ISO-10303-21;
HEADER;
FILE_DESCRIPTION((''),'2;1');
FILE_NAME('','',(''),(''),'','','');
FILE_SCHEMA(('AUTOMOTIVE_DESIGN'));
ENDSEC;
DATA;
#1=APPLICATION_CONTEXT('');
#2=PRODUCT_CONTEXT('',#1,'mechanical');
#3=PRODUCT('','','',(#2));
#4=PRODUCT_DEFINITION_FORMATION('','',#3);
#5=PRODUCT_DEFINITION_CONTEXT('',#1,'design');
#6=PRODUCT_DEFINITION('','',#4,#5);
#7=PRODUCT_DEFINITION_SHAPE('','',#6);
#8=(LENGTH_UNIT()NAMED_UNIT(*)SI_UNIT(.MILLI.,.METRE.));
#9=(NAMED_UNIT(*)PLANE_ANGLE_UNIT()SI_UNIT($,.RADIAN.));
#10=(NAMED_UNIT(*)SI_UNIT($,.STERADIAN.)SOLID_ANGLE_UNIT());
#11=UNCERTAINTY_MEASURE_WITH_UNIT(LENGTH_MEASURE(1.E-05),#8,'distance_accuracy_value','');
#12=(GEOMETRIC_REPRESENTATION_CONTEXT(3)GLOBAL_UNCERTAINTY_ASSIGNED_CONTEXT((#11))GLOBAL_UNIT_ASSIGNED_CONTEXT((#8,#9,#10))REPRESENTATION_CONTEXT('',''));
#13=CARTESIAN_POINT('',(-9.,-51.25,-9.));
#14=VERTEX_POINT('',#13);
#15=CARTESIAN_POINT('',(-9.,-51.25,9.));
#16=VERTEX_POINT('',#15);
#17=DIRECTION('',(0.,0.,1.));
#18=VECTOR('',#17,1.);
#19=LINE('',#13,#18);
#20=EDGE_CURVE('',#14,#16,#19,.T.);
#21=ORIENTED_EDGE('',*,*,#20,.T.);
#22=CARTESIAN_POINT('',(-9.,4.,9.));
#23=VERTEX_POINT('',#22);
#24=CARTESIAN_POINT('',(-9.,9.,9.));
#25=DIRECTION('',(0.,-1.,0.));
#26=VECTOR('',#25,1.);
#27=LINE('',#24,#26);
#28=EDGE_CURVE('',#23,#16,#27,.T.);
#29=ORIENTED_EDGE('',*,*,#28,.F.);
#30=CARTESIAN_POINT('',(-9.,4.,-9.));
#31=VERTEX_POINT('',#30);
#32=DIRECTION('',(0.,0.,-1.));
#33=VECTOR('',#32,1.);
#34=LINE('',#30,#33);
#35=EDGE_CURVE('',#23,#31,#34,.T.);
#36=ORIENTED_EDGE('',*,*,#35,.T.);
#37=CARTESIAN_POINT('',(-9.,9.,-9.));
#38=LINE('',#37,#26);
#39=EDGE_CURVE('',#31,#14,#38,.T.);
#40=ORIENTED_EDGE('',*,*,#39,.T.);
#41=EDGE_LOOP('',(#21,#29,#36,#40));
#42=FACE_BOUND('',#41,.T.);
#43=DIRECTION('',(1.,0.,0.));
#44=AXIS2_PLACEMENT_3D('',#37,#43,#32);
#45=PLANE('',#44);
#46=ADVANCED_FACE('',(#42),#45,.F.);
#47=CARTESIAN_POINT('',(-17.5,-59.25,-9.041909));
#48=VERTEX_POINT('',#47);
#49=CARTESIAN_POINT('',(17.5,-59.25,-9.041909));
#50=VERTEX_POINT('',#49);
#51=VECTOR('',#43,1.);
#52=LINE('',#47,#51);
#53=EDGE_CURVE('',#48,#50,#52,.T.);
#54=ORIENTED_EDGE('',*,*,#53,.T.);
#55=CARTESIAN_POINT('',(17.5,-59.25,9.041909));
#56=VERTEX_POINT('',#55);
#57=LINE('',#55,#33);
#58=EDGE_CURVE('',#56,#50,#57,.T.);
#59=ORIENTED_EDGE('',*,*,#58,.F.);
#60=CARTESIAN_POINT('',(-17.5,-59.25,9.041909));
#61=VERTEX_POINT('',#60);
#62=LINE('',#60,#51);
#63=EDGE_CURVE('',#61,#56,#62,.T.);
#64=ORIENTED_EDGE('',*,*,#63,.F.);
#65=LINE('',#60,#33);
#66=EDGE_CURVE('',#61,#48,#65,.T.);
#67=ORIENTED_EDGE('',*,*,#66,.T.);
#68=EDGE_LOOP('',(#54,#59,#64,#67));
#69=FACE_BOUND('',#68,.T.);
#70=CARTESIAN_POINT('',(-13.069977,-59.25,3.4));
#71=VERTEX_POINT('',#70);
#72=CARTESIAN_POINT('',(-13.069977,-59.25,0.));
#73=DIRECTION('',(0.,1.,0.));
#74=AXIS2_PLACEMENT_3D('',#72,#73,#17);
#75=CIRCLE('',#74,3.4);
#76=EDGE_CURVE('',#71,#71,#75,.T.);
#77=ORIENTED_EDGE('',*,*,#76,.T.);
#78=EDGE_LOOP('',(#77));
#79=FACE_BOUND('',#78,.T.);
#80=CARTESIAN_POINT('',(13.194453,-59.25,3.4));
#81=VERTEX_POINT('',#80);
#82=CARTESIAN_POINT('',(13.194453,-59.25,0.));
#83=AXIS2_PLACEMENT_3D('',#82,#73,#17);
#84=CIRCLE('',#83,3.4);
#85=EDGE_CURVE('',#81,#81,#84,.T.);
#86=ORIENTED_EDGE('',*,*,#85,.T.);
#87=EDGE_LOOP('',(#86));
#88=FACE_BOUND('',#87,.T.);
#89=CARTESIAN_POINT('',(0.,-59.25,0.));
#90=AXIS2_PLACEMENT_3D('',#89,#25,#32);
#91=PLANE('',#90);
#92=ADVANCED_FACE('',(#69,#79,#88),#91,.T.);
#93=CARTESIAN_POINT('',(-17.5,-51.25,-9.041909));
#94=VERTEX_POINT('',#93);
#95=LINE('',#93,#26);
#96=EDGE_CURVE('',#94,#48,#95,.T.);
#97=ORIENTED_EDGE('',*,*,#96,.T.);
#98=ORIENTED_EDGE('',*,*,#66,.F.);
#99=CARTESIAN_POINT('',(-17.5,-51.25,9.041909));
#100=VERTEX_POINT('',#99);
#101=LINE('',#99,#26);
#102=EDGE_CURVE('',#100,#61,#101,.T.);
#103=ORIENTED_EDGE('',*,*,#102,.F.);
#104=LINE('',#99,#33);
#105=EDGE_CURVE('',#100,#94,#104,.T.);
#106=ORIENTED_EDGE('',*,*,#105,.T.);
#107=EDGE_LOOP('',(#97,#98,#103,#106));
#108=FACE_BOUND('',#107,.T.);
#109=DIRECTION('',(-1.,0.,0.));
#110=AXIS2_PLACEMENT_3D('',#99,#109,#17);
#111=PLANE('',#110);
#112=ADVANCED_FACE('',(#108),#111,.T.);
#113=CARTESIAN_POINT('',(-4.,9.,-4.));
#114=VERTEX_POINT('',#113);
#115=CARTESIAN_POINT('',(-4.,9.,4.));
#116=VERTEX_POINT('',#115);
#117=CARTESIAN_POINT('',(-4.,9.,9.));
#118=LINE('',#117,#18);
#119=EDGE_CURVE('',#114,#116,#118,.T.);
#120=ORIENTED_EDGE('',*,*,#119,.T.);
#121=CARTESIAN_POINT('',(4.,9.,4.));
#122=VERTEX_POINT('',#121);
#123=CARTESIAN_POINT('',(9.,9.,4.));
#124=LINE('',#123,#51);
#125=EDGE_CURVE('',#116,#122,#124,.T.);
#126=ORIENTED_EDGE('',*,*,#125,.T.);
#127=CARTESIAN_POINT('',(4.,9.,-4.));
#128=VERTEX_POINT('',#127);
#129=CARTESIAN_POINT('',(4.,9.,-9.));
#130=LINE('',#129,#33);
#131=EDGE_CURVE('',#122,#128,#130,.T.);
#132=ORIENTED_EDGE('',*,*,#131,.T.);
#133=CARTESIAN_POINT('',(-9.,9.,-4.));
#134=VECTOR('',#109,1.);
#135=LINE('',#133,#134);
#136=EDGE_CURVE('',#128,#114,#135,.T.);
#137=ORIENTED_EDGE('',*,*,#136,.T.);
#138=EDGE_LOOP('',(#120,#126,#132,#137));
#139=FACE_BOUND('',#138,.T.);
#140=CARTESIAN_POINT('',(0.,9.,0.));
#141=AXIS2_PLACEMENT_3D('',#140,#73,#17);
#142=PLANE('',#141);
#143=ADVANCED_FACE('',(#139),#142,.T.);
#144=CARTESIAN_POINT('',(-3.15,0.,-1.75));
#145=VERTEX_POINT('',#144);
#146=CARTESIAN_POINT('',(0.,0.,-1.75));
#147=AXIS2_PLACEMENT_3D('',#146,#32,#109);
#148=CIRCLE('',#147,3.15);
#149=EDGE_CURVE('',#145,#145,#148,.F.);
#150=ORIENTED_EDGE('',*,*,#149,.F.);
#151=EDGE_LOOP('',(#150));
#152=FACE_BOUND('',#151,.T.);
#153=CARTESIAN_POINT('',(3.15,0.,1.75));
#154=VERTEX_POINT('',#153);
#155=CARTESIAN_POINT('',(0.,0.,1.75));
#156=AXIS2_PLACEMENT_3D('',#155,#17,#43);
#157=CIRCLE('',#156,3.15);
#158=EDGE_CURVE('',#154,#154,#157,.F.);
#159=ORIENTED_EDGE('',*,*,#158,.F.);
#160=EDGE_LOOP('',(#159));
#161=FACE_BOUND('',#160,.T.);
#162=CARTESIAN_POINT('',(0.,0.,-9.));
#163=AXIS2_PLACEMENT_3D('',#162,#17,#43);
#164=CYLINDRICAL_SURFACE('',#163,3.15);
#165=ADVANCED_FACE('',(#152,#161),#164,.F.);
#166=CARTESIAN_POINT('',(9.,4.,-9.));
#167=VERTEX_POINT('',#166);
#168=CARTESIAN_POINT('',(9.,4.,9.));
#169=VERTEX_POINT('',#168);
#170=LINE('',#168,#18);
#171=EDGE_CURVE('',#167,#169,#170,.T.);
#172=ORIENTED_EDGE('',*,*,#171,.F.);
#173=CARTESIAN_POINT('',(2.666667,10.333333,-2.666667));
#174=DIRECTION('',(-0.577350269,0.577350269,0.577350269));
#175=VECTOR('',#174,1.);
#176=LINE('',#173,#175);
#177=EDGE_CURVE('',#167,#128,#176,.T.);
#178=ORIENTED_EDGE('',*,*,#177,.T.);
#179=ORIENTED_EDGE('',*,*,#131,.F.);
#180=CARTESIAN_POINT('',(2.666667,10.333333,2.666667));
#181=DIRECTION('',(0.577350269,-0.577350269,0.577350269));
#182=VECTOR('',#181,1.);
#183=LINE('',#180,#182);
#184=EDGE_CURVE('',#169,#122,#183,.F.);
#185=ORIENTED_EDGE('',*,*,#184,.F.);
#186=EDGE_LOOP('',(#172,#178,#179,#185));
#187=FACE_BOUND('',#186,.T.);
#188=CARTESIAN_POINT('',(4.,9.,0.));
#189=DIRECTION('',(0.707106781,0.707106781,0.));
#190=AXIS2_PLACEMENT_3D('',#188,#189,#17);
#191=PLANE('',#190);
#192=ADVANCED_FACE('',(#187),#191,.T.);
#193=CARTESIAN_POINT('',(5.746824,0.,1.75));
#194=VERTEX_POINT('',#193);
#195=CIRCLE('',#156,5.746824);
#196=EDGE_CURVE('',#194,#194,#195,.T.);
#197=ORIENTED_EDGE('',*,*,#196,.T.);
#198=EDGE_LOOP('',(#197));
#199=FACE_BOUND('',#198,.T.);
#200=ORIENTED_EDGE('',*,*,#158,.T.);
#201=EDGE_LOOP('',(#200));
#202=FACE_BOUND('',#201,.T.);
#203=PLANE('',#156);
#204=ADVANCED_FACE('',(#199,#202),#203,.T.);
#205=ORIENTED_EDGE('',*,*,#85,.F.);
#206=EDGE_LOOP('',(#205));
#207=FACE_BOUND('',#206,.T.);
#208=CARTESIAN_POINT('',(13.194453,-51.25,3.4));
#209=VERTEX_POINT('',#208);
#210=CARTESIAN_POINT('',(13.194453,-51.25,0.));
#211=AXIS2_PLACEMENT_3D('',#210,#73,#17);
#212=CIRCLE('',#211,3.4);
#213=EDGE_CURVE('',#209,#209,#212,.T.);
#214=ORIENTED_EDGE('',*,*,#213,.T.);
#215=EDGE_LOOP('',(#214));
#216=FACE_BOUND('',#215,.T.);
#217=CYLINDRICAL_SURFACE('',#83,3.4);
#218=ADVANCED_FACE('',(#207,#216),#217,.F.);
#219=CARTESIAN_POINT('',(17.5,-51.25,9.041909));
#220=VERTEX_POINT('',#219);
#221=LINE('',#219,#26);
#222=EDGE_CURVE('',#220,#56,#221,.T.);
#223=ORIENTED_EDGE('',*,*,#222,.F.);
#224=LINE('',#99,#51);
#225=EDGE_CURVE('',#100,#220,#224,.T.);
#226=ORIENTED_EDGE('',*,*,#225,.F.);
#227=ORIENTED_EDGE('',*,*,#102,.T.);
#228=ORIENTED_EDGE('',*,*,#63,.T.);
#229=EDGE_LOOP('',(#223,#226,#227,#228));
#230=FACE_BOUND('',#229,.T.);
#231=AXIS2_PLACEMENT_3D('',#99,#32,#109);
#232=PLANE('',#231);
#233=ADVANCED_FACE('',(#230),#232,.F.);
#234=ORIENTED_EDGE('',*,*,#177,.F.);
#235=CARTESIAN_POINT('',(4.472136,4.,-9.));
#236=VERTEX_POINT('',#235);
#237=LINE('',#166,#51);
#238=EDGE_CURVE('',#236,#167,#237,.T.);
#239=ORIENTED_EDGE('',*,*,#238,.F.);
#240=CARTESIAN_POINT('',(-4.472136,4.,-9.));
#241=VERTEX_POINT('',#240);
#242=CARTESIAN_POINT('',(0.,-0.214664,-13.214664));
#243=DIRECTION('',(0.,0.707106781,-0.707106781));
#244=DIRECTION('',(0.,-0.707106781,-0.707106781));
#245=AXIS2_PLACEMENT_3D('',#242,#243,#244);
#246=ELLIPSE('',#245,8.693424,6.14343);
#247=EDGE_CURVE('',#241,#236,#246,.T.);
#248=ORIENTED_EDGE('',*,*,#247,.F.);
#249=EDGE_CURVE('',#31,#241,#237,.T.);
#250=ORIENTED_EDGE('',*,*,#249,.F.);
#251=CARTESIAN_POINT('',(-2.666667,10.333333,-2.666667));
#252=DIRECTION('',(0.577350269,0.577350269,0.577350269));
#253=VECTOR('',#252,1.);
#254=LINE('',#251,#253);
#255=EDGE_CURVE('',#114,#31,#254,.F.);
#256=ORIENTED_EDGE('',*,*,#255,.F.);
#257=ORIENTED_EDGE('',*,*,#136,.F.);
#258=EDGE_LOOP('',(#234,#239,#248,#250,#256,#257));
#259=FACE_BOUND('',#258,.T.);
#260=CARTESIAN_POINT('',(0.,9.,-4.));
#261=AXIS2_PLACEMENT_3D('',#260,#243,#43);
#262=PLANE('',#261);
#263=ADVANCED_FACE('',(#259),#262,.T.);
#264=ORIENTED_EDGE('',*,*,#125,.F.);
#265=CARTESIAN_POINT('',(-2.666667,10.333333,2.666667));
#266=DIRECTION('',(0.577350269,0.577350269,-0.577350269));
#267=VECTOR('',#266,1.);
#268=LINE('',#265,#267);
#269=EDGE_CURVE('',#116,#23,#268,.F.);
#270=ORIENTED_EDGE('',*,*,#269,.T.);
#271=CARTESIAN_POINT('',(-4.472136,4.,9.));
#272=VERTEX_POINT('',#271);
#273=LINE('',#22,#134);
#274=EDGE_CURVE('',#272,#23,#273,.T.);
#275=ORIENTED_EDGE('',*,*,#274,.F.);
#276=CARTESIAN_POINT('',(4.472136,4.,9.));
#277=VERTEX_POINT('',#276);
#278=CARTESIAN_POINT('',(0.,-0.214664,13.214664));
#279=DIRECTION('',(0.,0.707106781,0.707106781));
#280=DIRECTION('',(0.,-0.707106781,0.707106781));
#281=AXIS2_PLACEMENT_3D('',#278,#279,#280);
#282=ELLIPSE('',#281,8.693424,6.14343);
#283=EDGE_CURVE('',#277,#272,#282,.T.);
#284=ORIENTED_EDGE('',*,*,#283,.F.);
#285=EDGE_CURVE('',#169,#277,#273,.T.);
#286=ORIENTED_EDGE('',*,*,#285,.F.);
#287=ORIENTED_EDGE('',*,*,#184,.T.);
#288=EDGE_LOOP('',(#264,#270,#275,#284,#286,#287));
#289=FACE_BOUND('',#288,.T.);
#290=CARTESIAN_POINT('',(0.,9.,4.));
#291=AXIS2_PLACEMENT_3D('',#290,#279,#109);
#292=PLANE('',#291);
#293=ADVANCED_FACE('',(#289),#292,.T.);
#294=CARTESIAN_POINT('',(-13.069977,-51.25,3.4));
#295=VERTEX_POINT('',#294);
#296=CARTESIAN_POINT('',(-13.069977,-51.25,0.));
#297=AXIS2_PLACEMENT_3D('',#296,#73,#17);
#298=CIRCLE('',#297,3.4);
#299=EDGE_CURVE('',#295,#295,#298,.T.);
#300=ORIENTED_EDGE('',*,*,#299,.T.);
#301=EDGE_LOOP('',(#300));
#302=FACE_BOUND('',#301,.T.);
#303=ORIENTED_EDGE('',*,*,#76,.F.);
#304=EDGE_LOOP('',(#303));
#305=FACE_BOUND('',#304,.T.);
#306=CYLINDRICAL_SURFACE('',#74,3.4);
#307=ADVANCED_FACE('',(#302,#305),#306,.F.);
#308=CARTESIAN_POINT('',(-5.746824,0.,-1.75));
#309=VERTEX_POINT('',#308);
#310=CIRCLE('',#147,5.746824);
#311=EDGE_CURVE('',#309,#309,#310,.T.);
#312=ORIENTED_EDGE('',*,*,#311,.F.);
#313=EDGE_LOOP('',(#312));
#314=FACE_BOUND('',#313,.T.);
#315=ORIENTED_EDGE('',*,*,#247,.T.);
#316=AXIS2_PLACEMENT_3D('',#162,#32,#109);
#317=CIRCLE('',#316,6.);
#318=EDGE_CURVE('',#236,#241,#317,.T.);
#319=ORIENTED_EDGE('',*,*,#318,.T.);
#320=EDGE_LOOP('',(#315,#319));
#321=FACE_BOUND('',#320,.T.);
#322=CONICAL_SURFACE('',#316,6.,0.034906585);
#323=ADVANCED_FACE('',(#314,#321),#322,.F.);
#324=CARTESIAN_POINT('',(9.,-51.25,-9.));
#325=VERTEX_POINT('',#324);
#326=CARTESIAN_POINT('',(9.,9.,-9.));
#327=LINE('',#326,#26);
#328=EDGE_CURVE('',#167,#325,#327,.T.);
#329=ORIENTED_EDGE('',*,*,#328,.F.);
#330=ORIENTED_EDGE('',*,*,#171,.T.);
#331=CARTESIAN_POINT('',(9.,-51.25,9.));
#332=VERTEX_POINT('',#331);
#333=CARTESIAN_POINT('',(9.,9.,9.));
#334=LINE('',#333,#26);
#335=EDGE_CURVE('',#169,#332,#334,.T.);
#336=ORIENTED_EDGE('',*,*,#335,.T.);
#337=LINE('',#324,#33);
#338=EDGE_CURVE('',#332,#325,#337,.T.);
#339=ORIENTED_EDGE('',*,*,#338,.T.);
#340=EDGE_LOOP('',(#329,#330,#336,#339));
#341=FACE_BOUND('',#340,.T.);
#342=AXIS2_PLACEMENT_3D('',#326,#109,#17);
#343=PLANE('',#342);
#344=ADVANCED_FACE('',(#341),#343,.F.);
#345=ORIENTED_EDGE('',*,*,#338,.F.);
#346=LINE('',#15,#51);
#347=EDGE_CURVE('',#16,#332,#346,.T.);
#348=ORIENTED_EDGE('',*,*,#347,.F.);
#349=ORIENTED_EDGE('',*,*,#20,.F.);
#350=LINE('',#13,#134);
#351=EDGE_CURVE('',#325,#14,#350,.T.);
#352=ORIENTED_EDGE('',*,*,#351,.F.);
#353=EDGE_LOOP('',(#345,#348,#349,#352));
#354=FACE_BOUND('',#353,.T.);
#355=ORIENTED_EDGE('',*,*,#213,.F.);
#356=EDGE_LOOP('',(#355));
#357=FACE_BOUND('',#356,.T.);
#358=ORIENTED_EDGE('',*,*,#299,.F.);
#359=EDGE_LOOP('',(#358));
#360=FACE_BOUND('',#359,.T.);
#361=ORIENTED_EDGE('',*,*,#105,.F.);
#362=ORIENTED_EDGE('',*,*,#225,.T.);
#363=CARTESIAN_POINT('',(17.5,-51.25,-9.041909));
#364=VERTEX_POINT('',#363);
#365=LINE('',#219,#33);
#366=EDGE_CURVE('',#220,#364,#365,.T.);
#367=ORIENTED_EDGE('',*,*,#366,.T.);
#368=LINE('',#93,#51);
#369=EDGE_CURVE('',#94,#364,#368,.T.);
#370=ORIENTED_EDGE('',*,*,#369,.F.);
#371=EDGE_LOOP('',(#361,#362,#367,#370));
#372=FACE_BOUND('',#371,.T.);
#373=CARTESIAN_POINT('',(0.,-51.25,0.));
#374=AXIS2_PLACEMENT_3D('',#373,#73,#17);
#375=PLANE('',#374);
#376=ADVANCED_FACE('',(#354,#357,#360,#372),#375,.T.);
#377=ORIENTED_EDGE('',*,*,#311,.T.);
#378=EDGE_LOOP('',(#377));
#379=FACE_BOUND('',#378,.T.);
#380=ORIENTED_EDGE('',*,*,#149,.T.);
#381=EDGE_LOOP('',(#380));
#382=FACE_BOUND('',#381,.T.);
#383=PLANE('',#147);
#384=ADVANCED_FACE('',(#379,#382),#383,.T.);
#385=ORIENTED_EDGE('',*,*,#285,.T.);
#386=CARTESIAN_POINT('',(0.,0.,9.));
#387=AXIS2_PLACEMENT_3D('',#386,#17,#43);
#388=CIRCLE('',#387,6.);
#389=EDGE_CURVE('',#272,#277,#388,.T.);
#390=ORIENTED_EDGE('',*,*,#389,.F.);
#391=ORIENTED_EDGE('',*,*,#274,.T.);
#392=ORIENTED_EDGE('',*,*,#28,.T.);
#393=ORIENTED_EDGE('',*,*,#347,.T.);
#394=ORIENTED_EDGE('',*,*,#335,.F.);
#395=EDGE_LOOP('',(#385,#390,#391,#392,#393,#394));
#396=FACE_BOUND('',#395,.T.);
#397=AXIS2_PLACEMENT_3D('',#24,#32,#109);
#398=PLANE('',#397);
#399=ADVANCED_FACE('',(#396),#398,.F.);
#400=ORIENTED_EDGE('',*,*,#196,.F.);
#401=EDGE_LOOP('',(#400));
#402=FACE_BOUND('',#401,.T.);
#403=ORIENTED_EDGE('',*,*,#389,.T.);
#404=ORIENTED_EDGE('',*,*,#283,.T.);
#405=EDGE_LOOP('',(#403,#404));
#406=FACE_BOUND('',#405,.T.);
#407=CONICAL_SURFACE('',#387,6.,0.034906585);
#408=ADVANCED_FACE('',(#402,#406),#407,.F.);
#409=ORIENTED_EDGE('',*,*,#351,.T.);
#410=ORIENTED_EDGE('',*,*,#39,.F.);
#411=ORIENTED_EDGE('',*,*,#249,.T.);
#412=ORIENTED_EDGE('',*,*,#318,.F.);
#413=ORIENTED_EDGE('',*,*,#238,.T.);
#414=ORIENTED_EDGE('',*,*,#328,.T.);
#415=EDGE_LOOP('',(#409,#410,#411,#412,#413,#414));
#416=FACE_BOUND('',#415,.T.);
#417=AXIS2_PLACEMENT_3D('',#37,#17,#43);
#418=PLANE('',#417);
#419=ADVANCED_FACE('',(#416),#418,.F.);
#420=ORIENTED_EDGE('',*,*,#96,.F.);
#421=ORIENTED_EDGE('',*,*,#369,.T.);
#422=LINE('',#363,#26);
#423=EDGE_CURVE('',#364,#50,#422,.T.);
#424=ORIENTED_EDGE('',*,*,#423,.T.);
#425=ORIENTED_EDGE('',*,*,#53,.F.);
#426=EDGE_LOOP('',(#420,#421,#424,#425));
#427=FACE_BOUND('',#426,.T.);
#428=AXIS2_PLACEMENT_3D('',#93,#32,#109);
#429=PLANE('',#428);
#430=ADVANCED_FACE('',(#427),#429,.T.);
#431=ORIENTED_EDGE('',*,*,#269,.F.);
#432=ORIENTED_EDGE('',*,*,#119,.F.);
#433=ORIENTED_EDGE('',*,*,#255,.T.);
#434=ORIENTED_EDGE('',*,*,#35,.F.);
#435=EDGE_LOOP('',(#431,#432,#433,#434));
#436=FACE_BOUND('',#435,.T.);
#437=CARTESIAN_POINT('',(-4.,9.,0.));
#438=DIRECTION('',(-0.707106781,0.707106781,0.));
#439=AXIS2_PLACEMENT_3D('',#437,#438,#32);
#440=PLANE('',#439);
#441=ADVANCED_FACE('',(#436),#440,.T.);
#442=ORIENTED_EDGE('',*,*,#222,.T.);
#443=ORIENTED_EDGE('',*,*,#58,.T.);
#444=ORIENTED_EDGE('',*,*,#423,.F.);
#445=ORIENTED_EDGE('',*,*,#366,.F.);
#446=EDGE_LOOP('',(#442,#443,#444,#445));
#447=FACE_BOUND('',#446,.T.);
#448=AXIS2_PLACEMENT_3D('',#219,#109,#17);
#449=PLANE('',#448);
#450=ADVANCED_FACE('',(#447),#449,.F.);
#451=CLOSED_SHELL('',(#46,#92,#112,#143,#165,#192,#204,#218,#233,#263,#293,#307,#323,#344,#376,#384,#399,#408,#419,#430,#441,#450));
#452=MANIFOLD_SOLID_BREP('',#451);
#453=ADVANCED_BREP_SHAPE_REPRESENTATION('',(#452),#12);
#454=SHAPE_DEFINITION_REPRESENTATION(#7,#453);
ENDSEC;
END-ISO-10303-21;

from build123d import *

# Parameters (mm, degrees)
SKETCH4_W           = 18
SKETCH4_H           = 18
BOSS_EXTRUDE2_DEPTH = 9
SKETCH5_R           = 3.15
CUT_EXTRUDE1_DEPTH  = 18
SKETCH6_R           = 6
CUT_EXTRUDE2_DEPTH  = 7.25
CUT_EXTRUDE2_DRAFT  = -2
SKETCH8_R           = 6
CUT_EXTRUDE3_DEPTH  = 7.25
CUT_EXTRUDE3_DRAFT  = -2
CHAMFER1_SIZE       = 5
SKETCH13_W          = 18
SKETCH13_H          = 18
BOSS_EXTRUDE4_DEPTH = 50.25
SKETCH14_W          = 35
SKETCH14_H          = 18.08381725
BOSS_EXTRUDE5_DEPTH = 8
SKETCH15_R          = 3.4
CUT_EXTRUDE4_DEPTH  = 8
SKETCH16_R          = 3.4
CUT_EXTRUDE5_DEPTH  = 8


with BuildPart() as part:
    # Sketch4 → Boss-Extrude2 (new, symmetric)
    with BuildSketch(Plane(origin=(0, 0, 0), x_dir=(1, 0, 0), z_dir=(0, 1, 0))):
        Rectangle(SKETCH4_W, SKETCH4_H)
    extrude(amount=BOSS_EXTRUDE2_DEPTH, both=True)

    # Sketch5 → Cut-Extrude1 (cut)
    with BuildSketch(Plane.XY.offset(9)):
        Circle(SKETCH5_R)
    extrude(amount=-CUT_EXTRUDE1_DEPTH, mode=Mode.SUBTRACT)


with BuildPart() as cut_extrude2_tool:
    # Sketch6 → Cut-Extrude2 (with draft: the straight prism first)
    with BuildSketch(Plane.XY.offset(9)):
        Circle(SKETCH6_R)
    extrude(amount=-CUT_EXTRUDE2_DEPTH)
    # Cut-Extrude2: the draft: its side faces are tilted about the plane it starts from
    cut_extrude2_sides = [cut_extrude2_tool.faces().sort_by_distance(p)[0] for p in [
        (-6, 0, 5.375),
    ]]
    draft(cut_extrude2_sides, Plane.XY.offset(9), CUT_EXTRUDE2_DRAFT)


with BuildPart() as part_1:
    add(part.part)

    # Cut-Extrude2: cut by cut_extrude2_tool
    add(cut_extrude2_tool.part, mode=Mode.SUBTRACT)


with BuildPart() as cut_extrude3_tool:
    # Sketch8 → Cut-Extrude3 (with draft: the straight prism first)
    with BuildSketch(Plane(origin=(0, 0, -9), x_dir=(-1, 0, 0), z_dir=(0, 0, -1))):
        Circle(SKETCH8_R)
    extrude(amount=-CUT_EXTRUDE3_DEPTH)
    # Cut-Extrude3: the draft: its side faces are tilted about the plane it starts from
    cut_extrude3_sides = [cut_extrude3_tool.faces().sort_by_distance(p)[0] for p in [
        (6, 0, -5.375),
    ]]
    draft(cut_extrude3_sides, Plane(origin=(0, 0, -9), x_dir=(-1, 0, 0), z_dir=(0, 0, -1)), CUT_EXTRUDE3_DRAFT)


with BuildPart() as part_2:
    add(part_1.part)

    # Cut-Extrude3: cut by cut_extrude3_tool
    add(cut_extrude3_tool.part, mode=Mode.SUBTRACT)

    # Chamfer1
    # the kernel refuses this chamfer: 5 mm, written as the material it takes off along each edge
    with BuildSketch(Plane(origin=(-9, 9, 21.85841494), x_dir=(-0.027495876610586317, -0.9996219169112968, 0), z_dir=(0, 0, -1)), Plane(origin=(-21.85841494, 9, -9), x_dir=(0, -0.9996219169112968, -0.027495876610586317), z_dir=(1, 0, 0))) as chamfer1_piece_1:
        Polygon((CHAMFER1_SIZE * 0.999621916911, -CHAMFER1_SIZE * 0.0274958766106), (-CHAMFER1_SIZE * 0.0274958766106, -CHAMFER1_SIZE * 0.999621916911), (0, 0), align=None)
    extrude(amount=43.71682988, mode=Mode.SUBTRACT)
    with BuildSketch(Plane(origin=(21.85841494, 9, 9), x_dir=(0, 0.027495876610586317, -0.9996219169112968), z_dir=(-1, 0, 0)), Plane(origin=(9, 9, -21.85841494), x_dir=(-0.9996219169112968, 0.027495876610586317, 0), z_dir=(0, 0, 1))) as chamfer1_piece_2:
        Polygon((CHAMFER1_SIZE * 0.999621916911, CHAMFER1_SIZE * 0.0274958766106), (-CHAMFER1_SIZE * 0.0274958766106, CHAMFER1_SIZE * 0.999621916911), (0, 0), align=None)
    extrude(amount=43.71682988, mode=Mode.SUBTRACT)

    # Sketch13 → Boss-Extrude4 (add)
    with BuildSketch(Plane.XZ.offset(9)):
        Rectangle(SKETCH13_W, SKETCH13_H)
    extrude(amount=BOSS_EXTRUDE4_DEPTH)

    # Sketch14 → Boss-Extrude5 (add)
    with BuildSketch(Plane(origin=(0, -59.25, 0), x_dir=(-1, 0, 0), z_dir=(0, -1, 0))):
        Rectangle(SKETCH14_W, SKETCH14_H)
    extrude(amount=-BOSS_EXTRUDE5_DEPTH)

    # Sketch15 → Cut-Extrude4 (cut)
    with BuildSketch(Plane(origin=(0, -51.25, 0), x_dir=(1, 0, 0), z_dir=(0, 1, 0))):
        with Locations(Location((-13.069976583, 0, 0), (0, 0, 270))):
            Circle(SKETCH15_R)
    extrude(amount=-CUT_EXTRUDE4_DEPTH, mode=Mode.SUBTRACT)

    # Sketch16 → Cut-Extrude5 (cut)
    with BuildSketch(Plane(origin=(0, -51.25, 0), x_dir=(1, 0, 0), z_dir=(0, 1, 0))):
        with Locations(Location((13.194452551, 0, 0), (0, 0, 270))):
            Circle(SKETCH16_R)
    extrude(amount=-CUT_EXTRUDE5_DEPTH, mode=Mode.SUBTRACT)


solid = part_2.part
